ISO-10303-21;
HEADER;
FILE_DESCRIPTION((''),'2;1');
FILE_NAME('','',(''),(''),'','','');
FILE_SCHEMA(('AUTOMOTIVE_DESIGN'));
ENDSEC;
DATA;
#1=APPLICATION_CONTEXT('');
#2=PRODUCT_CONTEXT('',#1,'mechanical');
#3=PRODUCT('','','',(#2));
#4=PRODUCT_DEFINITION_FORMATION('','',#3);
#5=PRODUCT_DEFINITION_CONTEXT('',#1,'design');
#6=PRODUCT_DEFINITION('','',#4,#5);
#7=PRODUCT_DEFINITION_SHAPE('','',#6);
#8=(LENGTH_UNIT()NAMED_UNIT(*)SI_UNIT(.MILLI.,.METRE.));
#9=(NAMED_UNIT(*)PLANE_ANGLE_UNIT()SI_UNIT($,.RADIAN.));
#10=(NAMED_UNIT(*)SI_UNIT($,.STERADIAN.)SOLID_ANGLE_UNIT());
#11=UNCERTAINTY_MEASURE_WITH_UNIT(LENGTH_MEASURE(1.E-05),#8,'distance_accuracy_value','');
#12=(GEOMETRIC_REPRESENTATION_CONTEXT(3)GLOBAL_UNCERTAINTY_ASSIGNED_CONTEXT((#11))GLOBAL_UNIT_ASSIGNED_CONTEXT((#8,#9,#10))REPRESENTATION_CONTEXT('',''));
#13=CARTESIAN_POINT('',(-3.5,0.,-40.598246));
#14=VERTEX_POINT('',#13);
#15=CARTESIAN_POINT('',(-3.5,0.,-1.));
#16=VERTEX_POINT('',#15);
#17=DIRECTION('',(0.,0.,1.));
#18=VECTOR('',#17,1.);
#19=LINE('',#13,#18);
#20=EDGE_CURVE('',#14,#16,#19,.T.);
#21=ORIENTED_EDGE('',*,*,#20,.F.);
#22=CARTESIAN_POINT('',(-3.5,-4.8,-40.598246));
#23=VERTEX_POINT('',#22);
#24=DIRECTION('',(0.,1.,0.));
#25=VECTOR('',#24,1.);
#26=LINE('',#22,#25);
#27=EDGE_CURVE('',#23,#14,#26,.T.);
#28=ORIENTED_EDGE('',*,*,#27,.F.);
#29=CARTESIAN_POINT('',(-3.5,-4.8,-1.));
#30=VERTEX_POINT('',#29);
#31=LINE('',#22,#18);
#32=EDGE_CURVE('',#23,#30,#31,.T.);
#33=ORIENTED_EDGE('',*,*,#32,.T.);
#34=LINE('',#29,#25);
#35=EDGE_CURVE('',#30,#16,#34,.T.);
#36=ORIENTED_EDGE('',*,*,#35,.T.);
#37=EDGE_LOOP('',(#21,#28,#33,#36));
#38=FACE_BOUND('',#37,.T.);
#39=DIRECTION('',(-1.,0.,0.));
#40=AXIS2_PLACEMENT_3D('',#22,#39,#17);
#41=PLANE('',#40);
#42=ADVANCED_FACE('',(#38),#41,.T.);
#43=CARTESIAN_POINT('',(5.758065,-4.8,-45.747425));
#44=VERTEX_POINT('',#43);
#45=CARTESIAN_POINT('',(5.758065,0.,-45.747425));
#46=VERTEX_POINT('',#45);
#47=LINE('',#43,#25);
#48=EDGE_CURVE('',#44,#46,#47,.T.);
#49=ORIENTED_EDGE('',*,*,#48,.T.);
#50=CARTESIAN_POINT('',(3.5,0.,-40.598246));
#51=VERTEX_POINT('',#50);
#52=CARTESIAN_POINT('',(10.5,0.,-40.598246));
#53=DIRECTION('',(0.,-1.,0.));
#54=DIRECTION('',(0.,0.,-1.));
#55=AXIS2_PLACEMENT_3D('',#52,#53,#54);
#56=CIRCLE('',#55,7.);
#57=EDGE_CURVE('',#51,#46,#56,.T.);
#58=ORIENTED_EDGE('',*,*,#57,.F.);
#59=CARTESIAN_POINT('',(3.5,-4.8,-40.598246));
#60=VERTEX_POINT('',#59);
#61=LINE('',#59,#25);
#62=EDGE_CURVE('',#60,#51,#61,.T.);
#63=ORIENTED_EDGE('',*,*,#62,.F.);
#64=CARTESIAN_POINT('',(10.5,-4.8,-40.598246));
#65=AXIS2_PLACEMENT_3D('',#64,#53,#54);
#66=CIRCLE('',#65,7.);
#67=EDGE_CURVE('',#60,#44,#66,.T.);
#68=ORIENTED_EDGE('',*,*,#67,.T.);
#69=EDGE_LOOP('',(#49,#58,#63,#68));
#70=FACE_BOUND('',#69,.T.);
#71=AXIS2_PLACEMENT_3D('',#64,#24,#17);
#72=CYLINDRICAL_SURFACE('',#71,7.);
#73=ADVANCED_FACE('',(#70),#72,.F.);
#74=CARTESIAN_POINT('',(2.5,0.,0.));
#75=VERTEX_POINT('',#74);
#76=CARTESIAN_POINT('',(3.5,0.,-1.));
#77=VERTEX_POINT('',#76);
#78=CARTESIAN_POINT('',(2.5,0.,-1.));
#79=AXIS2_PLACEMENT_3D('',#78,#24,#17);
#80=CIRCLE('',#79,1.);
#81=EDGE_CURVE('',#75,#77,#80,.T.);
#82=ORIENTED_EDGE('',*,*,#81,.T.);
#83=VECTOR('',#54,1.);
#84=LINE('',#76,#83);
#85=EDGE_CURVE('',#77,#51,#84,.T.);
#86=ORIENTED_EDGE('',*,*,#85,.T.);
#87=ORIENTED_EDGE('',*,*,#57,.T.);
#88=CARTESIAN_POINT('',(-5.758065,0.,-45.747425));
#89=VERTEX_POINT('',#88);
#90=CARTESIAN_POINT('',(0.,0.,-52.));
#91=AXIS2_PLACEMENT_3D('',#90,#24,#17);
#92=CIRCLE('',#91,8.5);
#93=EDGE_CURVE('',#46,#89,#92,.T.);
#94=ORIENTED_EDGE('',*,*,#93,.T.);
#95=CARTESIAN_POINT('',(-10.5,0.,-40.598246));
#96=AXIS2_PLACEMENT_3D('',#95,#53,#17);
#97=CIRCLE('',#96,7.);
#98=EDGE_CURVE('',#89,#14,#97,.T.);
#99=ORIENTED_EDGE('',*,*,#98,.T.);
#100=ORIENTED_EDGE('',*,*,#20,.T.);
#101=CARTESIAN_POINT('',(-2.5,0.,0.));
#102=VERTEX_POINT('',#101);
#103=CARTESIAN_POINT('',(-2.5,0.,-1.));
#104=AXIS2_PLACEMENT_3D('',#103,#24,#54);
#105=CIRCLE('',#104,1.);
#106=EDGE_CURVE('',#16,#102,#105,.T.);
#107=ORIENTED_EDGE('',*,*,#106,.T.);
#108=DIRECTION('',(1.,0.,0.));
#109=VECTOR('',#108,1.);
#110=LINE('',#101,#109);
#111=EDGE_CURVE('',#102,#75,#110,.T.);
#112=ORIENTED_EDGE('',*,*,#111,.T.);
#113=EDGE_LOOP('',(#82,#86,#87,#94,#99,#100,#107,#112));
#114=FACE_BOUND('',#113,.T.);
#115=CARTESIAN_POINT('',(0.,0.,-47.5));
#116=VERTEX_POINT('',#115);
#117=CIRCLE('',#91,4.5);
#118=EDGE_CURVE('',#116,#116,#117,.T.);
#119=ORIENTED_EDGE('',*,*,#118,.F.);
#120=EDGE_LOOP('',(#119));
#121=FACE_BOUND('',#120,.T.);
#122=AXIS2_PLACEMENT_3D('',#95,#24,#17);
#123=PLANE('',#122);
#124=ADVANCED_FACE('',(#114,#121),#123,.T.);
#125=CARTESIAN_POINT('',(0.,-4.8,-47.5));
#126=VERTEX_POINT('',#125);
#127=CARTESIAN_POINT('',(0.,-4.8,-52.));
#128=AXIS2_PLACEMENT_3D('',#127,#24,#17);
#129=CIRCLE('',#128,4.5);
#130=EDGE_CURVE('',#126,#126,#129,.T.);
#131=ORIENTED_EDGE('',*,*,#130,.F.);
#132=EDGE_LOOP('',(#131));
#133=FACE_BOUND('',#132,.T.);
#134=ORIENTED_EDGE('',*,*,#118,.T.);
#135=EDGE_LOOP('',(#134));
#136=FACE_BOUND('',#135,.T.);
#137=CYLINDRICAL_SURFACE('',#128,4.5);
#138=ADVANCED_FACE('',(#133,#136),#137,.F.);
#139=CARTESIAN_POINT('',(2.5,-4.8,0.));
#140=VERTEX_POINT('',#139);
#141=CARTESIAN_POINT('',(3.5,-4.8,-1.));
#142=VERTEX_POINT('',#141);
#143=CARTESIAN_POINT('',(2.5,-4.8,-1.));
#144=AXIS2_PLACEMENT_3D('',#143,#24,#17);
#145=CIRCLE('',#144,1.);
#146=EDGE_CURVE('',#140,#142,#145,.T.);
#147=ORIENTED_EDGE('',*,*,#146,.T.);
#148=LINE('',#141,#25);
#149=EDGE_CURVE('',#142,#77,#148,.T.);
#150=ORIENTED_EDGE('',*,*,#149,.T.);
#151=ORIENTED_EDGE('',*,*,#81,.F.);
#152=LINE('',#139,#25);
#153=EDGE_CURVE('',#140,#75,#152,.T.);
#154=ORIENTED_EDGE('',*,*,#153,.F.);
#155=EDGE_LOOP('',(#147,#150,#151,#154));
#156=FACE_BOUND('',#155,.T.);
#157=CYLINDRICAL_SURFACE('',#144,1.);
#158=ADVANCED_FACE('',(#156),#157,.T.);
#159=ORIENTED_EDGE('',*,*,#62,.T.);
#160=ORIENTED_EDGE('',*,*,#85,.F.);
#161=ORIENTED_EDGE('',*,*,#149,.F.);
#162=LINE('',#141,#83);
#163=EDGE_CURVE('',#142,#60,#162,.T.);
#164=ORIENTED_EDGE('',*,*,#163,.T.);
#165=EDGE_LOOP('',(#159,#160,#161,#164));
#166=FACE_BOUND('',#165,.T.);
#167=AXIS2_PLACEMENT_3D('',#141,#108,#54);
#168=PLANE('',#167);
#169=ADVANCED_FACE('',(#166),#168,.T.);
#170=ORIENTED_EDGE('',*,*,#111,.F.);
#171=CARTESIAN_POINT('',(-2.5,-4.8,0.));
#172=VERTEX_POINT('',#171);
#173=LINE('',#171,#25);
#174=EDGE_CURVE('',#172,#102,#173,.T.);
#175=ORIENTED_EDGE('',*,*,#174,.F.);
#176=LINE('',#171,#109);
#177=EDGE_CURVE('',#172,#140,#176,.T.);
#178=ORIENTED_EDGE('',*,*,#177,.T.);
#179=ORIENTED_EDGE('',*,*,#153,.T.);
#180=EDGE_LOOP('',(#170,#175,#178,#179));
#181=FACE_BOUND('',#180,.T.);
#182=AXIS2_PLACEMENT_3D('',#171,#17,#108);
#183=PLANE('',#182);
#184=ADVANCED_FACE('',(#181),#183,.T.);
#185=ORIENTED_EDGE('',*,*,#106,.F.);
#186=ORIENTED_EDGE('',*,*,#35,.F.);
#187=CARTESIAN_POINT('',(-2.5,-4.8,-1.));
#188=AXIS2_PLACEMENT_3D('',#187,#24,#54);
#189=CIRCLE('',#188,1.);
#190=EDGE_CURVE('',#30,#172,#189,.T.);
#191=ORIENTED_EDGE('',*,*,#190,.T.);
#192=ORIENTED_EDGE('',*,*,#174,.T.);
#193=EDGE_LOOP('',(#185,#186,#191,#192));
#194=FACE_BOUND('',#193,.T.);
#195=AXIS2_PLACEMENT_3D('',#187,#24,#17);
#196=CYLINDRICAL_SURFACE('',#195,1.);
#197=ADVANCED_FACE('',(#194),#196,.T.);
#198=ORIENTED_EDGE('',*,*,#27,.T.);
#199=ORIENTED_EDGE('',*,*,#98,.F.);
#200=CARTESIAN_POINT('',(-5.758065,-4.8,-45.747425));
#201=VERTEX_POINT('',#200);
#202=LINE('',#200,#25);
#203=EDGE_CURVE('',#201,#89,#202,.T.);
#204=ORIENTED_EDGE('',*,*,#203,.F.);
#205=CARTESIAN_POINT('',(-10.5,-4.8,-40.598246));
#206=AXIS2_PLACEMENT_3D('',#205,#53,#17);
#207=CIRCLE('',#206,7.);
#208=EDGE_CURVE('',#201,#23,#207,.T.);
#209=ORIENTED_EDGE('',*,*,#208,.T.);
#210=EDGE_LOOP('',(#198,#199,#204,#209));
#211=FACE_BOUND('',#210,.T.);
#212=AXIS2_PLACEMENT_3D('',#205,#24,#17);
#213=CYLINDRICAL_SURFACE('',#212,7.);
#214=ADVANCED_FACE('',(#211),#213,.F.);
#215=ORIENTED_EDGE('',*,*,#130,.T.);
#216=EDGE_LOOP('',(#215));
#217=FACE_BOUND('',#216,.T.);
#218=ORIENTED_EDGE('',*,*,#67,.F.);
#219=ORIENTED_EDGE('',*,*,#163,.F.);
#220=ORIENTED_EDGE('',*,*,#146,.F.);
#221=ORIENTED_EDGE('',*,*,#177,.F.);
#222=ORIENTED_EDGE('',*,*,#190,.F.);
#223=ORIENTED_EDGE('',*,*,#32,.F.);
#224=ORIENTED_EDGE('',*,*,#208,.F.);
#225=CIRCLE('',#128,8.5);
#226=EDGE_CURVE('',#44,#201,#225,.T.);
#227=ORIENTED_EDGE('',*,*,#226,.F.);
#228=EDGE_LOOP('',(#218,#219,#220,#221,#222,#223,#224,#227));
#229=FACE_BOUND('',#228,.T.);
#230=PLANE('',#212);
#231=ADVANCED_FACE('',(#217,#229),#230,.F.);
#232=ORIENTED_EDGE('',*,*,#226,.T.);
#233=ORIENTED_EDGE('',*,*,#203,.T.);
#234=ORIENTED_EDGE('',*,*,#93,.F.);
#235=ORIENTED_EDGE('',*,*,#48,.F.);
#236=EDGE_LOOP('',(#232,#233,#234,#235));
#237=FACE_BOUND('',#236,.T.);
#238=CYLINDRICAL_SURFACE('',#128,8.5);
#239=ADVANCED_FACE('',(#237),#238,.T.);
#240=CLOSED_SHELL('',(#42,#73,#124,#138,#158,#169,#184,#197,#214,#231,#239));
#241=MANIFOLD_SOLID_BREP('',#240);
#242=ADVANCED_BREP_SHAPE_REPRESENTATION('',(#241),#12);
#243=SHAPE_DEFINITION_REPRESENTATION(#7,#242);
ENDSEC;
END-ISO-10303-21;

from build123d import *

# Parameters (mm, degrees)
ESBO_O1_R          = 4.5
FLANGE_BASE1_DEPTH = 4.8


# Sheet-metal steps are written as plain solids
with BuildPart() as part:
    # Esboço1 → Flange-base1 (new body)
    with BuildSketch(Plane(origin=(0, 0, 0), x_dir=(1, 0, 0), z_dir=(0, 1, 0))):
        with BuildLine():
            Line((-3.5, 40.598245749), (-3.5, 1))
            ThreePointArc((-3.5, 1), (-3.207106781, 0.292893219), (-2.5, 0))
            Line((-2.5, 0), (2.5, 0))
            ThreePointArc((2.5, 0), (3.207106781, 0.292893219), (3.5, 1))
            Line((3.5, 1), (3.5, 40.598245749))
            ThreePointArc((3.5, 40.598245749), (4.089323422, 43.4095134), (5.758064516, 45.747425088))
            ThreePointArc((5.758064516, 45.747425088), (0, 60.5), (-5.758064516, 45.747425088))
            ThreePointArc((-5.758064516, 45.747425088), (-4.089323422, 43.4095134), (-3.5, 40.598245749))
        make_face()
        with Locations(Location((0, 52, 0), (0, 0, 270))):
            Circle(ESBO_O1_R, mode=Mode.SUBTRACT)
    extrude(amount=-FLANGE_BASE1_DEPTH)


solid = part.part
